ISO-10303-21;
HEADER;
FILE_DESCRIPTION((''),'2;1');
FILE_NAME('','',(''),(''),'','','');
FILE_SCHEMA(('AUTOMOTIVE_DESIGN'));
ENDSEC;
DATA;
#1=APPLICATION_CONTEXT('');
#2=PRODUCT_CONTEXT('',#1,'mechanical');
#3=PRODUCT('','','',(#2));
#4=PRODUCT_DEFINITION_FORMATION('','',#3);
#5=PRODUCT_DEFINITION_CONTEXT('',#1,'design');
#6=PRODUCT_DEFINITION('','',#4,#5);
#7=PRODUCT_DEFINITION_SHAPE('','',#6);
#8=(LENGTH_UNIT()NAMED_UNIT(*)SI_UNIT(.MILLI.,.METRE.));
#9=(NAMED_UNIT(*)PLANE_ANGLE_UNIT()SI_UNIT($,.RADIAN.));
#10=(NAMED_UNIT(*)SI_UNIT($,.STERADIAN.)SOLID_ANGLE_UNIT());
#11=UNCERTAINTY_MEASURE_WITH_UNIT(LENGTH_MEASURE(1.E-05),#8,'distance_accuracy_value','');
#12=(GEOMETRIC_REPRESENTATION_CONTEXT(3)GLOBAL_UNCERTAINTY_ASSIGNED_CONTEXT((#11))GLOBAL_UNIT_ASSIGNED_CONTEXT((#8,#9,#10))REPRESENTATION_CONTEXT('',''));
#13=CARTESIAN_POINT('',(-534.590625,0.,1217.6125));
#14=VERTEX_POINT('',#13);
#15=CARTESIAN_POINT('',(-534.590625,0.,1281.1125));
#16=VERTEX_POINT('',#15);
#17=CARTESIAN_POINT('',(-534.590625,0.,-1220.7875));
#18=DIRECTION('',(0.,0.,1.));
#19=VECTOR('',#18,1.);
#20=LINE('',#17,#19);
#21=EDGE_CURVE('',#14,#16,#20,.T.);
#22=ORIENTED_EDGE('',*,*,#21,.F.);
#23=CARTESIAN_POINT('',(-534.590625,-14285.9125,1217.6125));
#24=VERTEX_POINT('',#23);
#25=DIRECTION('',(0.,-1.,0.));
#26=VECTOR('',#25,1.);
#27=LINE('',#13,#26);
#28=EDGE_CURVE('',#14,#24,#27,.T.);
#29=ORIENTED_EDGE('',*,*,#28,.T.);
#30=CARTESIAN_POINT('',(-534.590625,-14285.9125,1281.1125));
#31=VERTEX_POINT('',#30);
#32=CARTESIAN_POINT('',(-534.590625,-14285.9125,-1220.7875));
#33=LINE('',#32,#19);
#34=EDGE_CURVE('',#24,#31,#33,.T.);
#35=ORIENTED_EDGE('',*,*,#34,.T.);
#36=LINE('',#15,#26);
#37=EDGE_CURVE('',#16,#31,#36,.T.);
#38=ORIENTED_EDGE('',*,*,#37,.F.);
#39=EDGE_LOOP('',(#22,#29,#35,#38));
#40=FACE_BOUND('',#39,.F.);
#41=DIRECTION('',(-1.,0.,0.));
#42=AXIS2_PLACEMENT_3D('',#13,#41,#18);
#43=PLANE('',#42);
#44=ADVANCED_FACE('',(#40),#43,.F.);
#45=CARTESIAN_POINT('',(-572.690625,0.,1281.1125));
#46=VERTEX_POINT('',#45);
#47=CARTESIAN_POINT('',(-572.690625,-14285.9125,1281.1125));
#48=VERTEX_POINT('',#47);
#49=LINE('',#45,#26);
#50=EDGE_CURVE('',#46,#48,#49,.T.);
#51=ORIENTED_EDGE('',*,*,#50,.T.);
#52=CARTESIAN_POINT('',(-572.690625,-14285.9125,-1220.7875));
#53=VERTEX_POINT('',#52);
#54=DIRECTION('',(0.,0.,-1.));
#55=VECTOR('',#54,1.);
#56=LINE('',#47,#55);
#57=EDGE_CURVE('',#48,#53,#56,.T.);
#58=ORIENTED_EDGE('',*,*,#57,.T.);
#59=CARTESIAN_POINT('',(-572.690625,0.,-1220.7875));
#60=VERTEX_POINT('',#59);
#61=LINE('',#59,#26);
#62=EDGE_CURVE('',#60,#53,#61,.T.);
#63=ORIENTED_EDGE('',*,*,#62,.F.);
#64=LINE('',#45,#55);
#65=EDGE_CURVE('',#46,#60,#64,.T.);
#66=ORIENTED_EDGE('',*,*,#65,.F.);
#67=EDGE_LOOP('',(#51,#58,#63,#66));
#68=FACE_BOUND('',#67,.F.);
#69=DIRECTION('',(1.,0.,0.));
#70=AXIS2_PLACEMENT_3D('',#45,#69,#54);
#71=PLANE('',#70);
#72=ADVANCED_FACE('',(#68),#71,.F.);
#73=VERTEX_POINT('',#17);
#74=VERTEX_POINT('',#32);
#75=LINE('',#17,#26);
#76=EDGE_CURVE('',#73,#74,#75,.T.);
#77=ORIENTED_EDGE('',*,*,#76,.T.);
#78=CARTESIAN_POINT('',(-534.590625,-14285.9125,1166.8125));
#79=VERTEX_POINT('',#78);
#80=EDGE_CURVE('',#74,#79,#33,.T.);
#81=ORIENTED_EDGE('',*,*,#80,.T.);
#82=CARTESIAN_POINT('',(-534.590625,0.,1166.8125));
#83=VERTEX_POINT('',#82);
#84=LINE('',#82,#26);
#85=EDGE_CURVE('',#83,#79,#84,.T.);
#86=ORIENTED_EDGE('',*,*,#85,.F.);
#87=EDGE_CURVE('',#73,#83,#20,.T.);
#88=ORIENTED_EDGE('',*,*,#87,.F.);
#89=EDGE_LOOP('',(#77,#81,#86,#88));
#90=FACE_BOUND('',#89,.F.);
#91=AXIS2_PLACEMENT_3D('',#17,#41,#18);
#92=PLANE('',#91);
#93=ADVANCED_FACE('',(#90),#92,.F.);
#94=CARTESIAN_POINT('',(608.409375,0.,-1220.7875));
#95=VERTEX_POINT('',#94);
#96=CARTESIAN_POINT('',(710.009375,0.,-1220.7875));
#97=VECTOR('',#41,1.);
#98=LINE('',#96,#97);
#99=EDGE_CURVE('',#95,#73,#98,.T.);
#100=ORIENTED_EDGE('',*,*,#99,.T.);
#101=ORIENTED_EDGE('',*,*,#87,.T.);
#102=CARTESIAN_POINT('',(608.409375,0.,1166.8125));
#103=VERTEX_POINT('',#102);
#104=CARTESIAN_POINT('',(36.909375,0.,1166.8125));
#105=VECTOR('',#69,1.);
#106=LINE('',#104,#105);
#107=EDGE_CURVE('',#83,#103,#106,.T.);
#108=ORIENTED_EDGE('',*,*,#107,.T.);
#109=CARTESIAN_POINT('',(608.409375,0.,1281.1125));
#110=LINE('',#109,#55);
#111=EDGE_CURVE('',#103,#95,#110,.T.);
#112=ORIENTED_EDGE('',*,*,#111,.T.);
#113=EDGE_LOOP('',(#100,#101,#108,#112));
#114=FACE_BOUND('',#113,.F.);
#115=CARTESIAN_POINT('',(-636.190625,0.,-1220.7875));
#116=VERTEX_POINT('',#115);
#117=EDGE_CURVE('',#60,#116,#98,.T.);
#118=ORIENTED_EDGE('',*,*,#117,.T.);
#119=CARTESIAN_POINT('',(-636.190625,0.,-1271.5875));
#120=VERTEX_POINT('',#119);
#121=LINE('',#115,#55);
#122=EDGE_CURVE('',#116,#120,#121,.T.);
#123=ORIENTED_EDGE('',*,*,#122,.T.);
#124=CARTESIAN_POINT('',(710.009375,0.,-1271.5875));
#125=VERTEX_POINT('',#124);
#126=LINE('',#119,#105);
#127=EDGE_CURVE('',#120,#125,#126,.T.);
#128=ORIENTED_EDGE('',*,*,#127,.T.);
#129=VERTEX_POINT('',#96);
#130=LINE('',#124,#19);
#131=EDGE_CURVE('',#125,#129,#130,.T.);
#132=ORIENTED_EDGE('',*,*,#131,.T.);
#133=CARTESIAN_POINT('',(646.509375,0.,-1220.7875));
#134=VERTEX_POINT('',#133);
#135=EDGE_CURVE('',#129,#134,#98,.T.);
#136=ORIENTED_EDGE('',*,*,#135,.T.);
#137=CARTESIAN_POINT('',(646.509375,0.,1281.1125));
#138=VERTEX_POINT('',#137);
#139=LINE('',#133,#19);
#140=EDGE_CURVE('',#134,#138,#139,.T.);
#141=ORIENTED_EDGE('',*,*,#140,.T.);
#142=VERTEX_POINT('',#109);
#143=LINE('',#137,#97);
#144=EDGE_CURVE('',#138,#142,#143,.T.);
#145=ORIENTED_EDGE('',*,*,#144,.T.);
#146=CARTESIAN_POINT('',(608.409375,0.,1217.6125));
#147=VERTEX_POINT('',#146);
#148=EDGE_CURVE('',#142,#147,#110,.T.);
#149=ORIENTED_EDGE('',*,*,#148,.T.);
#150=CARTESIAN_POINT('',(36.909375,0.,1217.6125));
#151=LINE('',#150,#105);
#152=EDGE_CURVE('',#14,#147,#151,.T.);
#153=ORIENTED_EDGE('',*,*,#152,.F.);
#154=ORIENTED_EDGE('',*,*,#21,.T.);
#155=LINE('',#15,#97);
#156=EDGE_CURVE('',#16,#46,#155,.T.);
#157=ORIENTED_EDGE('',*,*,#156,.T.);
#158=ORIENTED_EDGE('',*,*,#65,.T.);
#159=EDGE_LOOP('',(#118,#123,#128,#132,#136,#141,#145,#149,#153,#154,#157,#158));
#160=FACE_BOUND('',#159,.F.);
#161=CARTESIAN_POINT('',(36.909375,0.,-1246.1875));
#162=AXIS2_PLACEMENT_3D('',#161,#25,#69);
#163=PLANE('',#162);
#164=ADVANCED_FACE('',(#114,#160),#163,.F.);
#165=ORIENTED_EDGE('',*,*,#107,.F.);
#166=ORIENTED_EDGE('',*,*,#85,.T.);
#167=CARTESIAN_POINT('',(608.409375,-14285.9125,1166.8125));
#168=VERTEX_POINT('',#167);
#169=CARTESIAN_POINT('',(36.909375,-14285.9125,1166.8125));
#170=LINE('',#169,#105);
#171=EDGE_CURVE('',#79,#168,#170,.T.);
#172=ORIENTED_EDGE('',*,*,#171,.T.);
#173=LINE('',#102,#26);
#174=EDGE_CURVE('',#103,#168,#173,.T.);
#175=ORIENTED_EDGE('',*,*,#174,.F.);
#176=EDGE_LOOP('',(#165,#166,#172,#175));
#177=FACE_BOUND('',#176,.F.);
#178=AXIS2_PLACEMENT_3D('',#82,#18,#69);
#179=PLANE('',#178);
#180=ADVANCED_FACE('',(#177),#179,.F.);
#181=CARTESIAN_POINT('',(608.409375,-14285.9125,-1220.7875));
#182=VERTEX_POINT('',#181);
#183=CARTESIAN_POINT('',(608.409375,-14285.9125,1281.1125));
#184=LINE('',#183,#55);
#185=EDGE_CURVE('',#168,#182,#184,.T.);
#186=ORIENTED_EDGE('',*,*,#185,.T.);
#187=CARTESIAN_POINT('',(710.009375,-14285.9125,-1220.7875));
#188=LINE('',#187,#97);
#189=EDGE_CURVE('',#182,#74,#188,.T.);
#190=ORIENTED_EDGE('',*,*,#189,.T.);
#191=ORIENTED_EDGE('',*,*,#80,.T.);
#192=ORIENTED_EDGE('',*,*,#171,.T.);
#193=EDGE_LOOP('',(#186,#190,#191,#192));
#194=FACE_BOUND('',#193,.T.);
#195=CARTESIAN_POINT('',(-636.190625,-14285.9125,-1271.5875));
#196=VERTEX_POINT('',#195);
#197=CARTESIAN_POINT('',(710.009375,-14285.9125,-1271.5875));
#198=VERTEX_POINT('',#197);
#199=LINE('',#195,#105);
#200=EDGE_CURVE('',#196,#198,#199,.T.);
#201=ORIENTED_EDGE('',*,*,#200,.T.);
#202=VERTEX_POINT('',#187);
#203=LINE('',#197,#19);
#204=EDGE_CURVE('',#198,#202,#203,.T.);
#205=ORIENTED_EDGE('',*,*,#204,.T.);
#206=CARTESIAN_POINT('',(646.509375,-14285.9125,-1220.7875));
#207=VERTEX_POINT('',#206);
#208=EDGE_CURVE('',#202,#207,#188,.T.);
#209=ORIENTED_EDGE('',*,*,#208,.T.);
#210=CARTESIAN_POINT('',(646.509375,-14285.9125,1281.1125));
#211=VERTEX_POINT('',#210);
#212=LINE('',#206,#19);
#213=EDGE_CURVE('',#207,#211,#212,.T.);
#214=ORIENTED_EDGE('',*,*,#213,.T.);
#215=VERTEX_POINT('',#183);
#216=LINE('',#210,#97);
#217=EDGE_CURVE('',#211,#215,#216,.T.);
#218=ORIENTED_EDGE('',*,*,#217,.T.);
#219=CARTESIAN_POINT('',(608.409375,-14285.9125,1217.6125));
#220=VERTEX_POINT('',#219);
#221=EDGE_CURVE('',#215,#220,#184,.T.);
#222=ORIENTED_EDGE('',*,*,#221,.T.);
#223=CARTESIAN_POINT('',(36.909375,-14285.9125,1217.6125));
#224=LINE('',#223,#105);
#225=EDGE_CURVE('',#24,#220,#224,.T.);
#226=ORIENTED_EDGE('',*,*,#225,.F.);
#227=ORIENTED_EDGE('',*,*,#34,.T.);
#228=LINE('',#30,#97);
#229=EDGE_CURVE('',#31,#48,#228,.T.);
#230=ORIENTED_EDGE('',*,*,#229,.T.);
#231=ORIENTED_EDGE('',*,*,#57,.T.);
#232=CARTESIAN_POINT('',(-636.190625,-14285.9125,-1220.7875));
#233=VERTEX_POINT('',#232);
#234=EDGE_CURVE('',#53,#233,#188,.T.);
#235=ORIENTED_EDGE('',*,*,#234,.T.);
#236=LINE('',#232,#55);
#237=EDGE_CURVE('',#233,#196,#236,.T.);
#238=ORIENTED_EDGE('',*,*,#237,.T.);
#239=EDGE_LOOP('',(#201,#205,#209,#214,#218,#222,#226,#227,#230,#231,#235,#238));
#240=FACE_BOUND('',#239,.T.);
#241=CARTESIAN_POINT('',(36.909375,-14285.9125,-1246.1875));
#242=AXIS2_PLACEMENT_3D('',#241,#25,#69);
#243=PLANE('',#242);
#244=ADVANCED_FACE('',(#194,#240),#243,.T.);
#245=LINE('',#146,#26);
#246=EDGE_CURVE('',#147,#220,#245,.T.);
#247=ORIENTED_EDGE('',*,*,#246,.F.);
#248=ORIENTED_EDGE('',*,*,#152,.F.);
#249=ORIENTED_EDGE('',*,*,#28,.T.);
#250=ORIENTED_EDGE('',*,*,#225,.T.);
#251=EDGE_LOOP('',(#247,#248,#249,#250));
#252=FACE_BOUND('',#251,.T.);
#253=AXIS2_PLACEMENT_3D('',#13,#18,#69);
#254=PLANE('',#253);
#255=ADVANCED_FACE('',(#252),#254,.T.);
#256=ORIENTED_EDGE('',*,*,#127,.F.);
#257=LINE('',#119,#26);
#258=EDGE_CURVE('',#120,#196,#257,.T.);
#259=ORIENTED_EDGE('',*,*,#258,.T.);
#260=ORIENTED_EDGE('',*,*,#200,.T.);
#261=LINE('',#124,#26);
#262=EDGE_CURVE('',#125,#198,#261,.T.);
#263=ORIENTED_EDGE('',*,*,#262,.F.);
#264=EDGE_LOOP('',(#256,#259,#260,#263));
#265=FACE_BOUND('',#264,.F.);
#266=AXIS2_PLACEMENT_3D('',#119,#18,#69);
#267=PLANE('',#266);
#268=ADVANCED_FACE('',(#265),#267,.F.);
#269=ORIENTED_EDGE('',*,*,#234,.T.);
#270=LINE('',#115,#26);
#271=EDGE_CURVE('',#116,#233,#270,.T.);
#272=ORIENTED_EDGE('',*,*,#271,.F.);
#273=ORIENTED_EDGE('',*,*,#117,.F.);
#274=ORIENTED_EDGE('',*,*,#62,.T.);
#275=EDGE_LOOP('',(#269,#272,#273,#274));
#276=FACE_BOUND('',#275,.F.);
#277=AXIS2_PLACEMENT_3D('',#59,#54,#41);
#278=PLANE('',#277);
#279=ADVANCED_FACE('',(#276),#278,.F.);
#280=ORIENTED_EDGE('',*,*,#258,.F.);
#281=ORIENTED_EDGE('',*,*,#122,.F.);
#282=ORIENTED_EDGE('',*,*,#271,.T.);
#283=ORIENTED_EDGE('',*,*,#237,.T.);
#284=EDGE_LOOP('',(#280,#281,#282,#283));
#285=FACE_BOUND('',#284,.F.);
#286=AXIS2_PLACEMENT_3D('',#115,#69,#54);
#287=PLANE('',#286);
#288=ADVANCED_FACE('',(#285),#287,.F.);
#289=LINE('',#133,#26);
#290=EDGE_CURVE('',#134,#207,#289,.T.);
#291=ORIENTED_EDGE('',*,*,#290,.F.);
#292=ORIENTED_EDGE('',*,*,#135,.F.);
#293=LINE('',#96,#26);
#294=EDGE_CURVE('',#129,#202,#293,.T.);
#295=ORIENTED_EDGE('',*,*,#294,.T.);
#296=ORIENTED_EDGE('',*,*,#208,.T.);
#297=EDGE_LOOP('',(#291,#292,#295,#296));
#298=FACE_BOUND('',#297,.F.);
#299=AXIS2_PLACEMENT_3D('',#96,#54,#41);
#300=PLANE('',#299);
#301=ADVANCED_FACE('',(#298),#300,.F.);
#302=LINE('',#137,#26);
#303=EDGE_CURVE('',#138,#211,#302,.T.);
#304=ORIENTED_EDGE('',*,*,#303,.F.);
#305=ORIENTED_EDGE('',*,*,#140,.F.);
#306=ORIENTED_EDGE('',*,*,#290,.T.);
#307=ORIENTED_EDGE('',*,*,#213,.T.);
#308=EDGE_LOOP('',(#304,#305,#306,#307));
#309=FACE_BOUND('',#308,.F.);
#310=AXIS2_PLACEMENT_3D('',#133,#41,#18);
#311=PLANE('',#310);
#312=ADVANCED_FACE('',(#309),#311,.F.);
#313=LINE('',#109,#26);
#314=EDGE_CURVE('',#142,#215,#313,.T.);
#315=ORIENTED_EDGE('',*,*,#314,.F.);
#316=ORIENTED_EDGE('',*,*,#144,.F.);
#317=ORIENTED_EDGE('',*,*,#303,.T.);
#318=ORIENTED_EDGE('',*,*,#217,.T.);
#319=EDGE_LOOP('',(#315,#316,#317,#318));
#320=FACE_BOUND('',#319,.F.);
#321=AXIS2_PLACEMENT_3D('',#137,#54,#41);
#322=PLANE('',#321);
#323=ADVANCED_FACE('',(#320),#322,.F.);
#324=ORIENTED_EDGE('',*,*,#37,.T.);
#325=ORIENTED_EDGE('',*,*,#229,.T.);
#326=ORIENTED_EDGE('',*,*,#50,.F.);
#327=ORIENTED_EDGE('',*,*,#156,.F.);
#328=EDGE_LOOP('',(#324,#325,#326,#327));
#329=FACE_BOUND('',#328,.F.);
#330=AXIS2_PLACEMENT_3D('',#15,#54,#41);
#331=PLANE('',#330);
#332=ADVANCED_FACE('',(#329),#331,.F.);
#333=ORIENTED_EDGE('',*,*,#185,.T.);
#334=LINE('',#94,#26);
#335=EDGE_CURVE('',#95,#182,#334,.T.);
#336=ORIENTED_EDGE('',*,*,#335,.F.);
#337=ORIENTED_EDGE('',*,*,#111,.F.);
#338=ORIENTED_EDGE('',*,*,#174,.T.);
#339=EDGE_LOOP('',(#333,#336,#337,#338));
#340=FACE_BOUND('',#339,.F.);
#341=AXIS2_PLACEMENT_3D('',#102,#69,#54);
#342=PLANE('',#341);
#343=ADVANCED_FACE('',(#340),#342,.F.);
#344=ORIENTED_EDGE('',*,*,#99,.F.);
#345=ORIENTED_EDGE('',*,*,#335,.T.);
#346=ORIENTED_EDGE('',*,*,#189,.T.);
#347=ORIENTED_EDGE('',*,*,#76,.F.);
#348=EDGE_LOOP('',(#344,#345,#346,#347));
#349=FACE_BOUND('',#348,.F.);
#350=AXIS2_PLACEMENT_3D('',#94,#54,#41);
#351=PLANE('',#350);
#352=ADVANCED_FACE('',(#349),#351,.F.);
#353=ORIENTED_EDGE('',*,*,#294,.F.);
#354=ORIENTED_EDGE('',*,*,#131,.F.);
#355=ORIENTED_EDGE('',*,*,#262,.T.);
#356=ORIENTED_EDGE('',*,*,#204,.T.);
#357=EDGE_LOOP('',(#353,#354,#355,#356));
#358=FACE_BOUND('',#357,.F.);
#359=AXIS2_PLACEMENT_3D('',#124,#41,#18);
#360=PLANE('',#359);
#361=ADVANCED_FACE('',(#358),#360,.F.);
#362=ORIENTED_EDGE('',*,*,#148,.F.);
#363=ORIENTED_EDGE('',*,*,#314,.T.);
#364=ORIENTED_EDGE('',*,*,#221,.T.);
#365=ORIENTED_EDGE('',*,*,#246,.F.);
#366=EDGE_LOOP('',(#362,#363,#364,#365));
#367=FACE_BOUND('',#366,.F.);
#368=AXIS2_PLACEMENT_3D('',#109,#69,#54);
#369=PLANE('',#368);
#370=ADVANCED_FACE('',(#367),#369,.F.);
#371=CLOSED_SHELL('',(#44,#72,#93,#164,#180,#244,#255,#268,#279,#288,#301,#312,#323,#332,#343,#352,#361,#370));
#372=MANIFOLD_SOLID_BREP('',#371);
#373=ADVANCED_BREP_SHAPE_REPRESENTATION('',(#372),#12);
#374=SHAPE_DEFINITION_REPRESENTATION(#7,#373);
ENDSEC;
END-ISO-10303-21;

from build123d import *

# Parameters (mm, degrees)
F0_W     = 1143
F0_H     = 50.8
F1_DEPTH = 14285.9125


# Not quite as in the source:
# - a feature of the source that left no trace in its solid (it failed there, or was rolled back) is left out


with BuildPart() as f1:
    # F0 (on Front) → F1 (new body)
    with BuildSketch(Plane.XZ):
        Polygon((-636.190625, -1271.5875), (710.009375, -1271.5875), (710.009375, -1220.7875), (646.509375, -1220.7875), (608.409375, -1220.7875), (-534.590625, -1220.7875), (-572.690625, -1220.7875), (-636.190625, -1220.7875), align=None)
        Polygon((608.409375, -1220.7875), (646.509375, -1220.7875), (646.509375, 1281.1125), (608.409375, 1281.1125), (608.409375, 1217.6125), (608.409375, 1166.8125), align=None)
        Polygon((-572.690625, 1281.1125), (-572.690625, -1220.7875), (-534.590625, -1220.7875), (-534.590625, 1166.8125), (-534.590625, 1217.6125), (-534.590625, 1281.1125), align=None)
        with Locations((36.909375, 1192.2125)):
            Rectangle(F0_W, F0_H)
    extrude(amount=F1_DEPTH)


solid = f1.part
